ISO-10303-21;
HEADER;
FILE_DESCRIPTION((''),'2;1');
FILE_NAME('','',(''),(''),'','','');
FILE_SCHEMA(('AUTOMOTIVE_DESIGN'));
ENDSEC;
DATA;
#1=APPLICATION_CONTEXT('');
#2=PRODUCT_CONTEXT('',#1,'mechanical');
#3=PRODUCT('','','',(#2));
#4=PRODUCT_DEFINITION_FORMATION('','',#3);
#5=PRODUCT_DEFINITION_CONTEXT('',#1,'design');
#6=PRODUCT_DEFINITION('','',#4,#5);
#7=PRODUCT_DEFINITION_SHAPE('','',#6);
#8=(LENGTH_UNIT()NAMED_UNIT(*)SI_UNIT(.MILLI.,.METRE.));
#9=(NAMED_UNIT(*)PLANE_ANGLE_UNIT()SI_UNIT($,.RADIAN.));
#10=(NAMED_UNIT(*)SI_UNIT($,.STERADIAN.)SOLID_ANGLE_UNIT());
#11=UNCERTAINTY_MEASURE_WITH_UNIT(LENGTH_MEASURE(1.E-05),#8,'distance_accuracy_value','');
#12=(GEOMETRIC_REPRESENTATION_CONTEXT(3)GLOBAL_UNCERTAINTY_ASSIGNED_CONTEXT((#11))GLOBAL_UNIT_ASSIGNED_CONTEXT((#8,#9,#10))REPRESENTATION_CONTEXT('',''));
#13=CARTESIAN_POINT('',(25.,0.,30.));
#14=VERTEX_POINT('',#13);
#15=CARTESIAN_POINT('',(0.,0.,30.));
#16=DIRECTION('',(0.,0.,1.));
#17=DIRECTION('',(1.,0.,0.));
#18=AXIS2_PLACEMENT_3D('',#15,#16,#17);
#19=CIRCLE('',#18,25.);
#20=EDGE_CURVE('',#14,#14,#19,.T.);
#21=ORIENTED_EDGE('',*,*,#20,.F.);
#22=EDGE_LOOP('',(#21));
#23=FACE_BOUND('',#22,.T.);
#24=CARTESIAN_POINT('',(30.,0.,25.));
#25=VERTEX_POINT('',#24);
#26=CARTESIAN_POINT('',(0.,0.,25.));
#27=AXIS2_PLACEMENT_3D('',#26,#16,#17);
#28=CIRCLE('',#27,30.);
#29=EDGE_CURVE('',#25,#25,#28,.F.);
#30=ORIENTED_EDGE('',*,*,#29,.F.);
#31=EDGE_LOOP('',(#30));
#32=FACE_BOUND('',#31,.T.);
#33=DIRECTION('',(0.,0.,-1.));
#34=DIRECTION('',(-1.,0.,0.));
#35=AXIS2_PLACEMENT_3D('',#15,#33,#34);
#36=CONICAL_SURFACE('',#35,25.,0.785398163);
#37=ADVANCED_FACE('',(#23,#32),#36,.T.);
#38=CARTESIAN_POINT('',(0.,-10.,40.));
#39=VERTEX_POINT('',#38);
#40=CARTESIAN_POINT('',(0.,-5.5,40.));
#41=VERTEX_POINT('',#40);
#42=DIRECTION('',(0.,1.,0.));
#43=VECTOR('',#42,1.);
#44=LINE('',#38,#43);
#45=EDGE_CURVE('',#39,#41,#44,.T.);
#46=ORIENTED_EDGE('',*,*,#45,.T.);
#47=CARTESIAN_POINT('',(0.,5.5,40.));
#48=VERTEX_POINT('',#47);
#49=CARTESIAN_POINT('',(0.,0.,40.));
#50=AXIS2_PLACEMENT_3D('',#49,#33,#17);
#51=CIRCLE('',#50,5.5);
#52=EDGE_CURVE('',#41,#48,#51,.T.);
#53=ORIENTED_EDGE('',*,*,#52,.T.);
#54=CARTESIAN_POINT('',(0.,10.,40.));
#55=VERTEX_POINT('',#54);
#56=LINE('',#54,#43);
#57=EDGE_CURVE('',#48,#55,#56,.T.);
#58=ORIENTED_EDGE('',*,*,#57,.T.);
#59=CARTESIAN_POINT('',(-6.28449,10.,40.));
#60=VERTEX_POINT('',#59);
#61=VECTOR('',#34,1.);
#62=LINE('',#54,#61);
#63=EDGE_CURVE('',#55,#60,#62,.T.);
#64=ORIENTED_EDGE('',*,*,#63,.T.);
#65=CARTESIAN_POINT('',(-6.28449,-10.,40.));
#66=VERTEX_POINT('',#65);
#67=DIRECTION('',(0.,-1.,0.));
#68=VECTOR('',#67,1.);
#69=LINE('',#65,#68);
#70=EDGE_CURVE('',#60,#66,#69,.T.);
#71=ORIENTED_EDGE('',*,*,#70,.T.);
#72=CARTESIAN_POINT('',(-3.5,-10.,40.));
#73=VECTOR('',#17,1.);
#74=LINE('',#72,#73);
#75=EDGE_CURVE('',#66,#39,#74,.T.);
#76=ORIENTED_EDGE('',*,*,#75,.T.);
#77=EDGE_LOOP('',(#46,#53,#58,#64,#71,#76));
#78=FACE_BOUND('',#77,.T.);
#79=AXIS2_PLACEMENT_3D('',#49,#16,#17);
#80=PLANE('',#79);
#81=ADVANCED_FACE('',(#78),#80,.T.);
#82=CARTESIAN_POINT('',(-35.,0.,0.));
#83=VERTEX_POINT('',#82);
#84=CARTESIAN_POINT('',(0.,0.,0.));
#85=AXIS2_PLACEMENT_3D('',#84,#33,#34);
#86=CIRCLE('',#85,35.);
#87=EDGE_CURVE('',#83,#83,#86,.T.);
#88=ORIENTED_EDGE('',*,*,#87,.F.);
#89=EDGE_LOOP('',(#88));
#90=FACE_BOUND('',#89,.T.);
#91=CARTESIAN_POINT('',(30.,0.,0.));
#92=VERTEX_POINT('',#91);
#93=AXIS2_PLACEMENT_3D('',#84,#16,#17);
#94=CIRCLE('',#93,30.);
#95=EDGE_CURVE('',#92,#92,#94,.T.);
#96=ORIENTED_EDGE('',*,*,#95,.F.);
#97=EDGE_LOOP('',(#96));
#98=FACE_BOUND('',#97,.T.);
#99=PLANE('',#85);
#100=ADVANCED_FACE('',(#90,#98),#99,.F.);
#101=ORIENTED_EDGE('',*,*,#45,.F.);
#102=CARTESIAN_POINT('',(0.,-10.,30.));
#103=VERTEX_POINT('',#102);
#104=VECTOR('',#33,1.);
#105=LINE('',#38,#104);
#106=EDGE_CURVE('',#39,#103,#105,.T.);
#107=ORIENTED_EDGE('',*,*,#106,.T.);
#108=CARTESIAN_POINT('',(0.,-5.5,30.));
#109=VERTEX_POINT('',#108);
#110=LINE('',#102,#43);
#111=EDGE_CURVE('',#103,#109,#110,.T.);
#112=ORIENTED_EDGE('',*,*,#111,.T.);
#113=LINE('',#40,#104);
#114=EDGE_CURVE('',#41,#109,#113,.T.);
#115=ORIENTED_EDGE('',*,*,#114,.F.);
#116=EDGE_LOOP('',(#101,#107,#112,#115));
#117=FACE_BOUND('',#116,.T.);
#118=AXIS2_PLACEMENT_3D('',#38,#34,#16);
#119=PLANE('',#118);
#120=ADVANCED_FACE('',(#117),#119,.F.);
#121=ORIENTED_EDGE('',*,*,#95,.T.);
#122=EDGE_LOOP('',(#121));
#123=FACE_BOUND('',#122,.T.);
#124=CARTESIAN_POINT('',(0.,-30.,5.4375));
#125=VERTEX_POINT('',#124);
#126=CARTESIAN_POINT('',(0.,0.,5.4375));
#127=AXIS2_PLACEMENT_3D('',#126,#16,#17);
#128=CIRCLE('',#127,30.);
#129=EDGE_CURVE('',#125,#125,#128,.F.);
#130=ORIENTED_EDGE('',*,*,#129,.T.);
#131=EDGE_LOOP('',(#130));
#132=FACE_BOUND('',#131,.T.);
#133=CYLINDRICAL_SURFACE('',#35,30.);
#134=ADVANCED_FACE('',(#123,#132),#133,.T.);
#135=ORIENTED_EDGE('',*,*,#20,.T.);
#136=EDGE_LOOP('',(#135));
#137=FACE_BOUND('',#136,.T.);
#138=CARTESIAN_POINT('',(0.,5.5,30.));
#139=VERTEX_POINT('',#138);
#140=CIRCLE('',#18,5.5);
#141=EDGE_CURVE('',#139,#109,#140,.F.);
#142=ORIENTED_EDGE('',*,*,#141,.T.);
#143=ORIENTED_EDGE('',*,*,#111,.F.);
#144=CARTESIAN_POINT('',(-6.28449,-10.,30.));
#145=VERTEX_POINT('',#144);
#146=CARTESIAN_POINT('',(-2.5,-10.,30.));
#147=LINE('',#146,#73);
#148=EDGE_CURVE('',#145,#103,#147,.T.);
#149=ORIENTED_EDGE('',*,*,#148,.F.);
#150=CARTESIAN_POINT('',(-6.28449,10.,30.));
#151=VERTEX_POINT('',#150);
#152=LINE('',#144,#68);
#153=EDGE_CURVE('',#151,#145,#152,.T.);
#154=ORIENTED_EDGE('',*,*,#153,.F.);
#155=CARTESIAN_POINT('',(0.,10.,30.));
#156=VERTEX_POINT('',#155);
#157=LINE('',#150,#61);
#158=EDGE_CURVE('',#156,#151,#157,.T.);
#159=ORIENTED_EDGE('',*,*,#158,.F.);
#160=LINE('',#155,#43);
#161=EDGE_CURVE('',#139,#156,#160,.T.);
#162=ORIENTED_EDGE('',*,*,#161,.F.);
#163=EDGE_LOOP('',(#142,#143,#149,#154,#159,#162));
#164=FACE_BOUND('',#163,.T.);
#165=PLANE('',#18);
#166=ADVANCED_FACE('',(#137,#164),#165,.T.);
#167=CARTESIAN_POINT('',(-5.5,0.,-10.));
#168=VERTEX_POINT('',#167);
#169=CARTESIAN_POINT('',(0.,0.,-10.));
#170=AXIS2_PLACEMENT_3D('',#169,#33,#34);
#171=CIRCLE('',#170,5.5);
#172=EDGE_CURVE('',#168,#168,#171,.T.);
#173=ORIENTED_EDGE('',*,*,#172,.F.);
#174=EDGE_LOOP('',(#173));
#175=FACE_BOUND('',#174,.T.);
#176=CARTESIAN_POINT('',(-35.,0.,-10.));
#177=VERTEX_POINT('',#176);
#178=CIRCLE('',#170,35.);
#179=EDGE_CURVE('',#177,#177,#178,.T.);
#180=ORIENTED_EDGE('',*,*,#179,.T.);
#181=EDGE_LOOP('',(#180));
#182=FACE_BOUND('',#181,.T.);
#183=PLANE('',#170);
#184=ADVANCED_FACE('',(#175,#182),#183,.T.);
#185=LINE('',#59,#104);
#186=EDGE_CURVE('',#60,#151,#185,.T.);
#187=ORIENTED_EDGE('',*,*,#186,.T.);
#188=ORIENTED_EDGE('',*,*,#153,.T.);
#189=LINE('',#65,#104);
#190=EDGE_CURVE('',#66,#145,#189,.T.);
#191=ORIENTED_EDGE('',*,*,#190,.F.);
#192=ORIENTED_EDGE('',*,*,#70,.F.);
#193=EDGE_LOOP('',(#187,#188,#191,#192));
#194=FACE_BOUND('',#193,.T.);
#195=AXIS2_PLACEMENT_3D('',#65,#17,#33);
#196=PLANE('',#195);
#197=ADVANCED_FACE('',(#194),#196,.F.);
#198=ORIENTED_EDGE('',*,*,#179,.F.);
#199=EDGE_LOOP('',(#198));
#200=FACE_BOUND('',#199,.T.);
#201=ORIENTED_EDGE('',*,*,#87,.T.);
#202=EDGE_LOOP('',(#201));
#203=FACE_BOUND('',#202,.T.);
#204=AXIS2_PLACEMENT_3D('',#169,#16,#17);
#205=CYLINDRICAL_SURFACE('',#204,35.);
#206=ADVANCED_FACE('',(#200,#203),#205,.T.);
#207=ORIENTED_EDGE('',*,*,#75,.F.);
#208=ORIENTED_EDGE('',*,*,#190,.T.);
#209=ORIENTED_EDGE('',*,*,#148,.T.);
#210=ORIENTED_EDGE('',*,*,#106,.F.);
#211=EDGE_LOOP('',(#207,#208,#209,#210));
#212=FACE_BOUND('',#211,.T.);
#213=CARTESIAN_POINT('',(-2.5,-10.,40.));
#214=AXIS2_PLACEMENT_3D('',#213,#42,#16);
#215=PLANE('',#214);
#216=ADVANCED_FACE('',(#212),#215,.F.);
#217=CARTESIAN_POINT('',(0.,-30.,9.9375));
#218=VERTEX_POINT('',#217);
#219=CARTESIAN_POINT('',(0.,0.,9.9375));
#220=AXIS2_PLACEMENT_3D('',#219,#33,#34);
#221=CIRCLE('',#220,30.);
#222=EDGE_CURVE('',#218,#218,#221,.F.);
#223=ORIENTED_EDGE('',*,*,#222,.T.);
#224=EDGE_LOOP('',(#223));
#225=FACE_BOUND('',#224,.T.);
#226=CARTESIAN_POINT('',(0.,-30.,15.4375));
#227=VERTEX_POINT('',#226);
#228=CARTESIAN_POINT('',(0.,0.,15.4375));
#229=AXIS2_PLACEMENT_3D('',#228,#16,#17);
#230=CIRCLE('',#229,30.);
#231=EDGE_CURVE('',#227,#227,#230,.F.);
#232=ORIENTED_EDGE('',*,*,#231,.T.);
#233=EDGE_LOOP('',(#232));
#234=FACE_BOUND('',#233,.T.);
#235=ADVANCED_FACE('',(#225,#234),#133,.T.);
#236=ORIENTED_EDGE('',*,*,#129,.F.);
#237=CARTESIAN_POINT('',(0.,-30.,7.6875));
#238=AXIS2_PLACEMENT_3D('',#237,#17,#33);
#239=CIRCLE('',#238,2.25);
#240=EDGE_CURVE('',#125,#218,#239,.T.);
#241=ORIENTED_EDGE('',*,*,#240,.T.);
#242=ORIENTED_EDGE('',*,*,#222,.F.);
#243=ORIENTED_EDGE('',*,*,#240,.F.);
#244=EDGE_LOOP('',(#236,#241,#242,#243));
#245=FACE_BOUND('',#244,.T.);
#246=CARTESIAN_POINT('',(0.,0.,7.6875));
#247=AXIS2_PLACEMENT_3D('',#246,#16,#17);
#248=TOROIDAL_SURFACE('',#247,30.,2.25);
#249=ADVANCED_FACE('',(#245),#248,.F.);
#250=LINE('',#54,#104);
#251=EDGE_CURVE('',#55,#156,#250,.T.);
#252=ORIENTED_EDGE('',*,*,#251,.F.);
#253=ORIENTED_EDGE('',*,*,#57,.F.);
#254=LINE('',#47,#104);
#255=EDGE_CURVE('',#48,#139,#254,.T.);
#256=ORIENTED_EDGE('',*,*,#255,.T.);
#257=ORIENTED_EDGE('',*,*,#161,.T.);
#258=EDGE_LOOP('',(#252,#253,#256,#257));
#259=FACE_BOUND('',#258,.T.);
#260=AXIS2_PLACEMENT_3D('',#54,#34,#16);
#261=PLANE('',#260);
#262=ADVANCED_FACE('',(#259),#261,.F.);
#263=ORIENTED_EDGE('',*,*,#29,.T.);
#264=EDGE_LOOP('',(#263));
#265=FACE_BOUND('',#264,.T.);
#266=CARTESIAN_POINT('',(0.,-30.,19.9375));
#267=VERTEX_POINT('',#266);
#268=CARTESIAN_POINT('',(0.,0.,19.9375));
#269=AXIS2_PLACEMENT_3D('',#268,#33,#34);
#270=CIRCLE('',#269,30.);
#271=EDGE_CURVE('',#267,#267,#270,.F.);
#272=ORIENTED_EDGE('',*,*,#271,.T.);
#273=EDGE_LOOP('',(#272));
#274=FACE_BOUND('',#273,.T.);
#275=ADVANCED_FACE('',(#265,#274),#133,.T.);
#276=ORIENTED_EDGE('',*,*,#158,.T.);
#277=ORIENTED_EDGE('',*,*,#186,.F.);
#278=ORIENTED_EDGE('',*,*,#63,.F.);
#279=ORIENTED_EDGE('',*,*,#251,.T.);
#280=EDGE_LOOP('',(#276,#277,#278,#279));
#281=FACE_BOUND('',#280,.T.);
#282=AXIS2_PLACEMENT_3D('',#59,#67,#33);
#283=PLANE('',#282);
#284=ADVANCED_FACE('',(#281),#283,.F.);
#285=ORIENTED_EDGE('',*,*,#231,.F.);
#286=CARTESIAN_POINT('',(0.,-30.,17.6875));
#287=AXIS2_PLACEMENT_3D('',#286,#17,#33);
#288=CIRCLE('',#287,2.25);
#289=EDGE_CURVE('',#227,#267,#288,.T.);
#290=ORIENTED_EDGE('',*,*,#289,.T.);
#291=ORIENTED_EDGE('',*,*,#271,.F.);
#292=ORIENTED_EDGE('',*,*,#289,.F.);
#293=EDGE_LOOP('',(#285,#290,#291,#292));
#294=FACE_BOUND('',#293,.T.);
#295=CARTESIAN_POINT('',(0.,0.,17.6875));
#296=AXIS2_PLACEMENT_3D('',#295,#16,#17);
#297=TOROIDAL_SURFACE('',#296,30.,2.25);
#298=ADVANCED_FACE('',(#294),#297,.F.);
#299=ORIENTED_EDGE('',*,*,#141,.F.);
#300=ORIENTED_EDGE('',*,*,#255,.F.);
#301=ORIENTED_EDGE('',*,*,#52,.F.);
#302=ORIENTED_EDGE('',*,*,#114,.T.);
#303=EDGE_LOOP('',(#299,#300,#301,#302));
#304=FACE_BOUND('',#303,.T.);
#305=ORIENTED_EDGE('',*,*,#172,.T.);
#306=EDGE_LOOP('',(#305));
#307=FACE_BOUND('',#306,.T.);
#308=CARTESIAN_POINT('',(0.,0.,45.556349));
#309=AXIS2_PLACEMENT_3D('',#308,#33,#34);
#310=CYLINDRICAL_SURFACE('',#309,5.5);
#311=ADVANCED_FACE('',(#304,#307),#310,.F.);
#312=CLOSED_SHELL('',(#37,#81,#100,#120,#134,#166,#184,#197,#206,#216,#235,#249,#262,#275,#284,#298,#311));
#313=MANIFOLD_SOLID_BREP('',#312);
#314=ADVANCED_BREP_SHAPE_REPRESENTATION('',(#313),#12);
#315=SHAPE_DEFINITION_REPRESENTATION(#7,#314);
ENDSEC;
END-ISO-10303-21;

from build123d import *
from build123d.topology import SkipClean

# Parameters (mm, degrees)
ESQUISSE1_R                = 30
BOSS_EXTRU_1_DEPTH         = 30
ESQUISSE2_R                = 35
BOSS_EXTRU_2_DEPTH         = 10
CHANFREIN1_SIZE            = 5
ESQUISSE3_R                = 5.5
ENL_V_MAT_EXTRU_1_DEPTH    = 40
BOSS_EXTRU_6_DEPTH         = 10
ESQUISSE5_R                = 2.25
R_P_TITION_LIN_AIRE1_COUNT = 2
R_P_TITION_LIN_AIRE1_PITCH = 10


with BuildPart() as part:
    # Esquisse1 → Boss.-Extru.1 (new body)
    with BuildSketch(Plane.XY):
        Circle(ESQUISSE1_R)
    extrude(amount=BOSS_EXTRU_1_DEPTH)

    # Esquisse2 → Boss.-Extru.2 (add)
    with BuildSketch(Plane(origin=(0, 0, 0), x_dir=(-1, 0, 0), z_dir=(0, 0, -1))):
        Circle(ESQUISSE2_R)
    extrude(amount=BOSS_EXTRU_2_DEPTH)

    # Chanfrein1
    chanfrein1_edges = [part.edges().sort_by_distance(p)[0] for p in [
        (-30, 0, 30),
    ]]
    chamfer(chanfrein1_edges, length=CHANFREIN1_SIZE)

    # Esquisse3 → Enlèv. mat.-Extru.1 (cut)
    with BuildSketch(Plane(origin=(0, 0, -10), x_dir=(-1, 0, 0), z_dir=(0, 0, -1))):
        Circle(ESQUISSE3_R)
    extrude(amount=-ENL_V_MAT_EXTRU_1_DEPTH, mode=Mode.SUBTRACT)

    # Esquisse4 → Boss.-Extru.6 (add)
    with SkipClean():  # the faces are left unmerged after this step: merging them gives an invalid solid
        with BuildSketch(Plane.XY.offset(30)):
            with BuildLine():
                Line((0, 10), (0, 5.5))
                ThreePointArc((0, 5.5), (-5.5, 0), (0, -5.5))
                Line((0, -5.5), (0, -10))
                Line((0, -10), (-2.5, -10))
                Line((-2.5, -10), (-3.5, -10))
                Line((-3.5, -10), (-6.284490288, -10))
                Line((-6.284490288, -10), (-6.284490288, 10))
                Line((-6.284490288, 10), (-3.5, 10))
                Line((-3.5, 10), (-2.5, 10))
                Line((-2.5, 10), (0, 10))
            make_face()
        extrude(amount=BOSS_EXTRU_6_DEPTH)
    add(part.part.scale(1), mode=Mode.REPLACE)  # the faces are merged on a copy

    # Enlèvement de matière-Balayage1: sweep along a path in Esquisse6
    with BuildLine(Plane.XY.offset(8)) as enl_vement_de_mati_re_balayage1_path:
        CenterArc((0, 0), 23.00163751, 0, 360)
    # Esquisse5 → Enlèvement de matière-Balayage1 (sweep, cut)
    with BuildSketch(Plane(origin=(0, 0, 0), x_dir=(0, 0, -1), z_dir=(1, 0, 0))):
        with Locations((-7.687500001, -30)):
            Circle(ESQUISSE5_R)
    enl_vement_de_mati_re_balayage1 = sweep(path=enl_vement_de_mati_re_balayage1_path.line, mode=Mode.SUBTRACT)

    # Répétition linéaire1: Enlèvement de matière-Balayage1 ×2
    with Locations(*[(0, 0, i * R_P_TITION_LIN_AIRE1_PITCH) for i in range(1, R_P_TITION_LIN_AIRE1_COUNT)]):
        add(enl_vement_de_mati_re_balayage1, mode=Mode.SUBTRACT)


solid = part.part
